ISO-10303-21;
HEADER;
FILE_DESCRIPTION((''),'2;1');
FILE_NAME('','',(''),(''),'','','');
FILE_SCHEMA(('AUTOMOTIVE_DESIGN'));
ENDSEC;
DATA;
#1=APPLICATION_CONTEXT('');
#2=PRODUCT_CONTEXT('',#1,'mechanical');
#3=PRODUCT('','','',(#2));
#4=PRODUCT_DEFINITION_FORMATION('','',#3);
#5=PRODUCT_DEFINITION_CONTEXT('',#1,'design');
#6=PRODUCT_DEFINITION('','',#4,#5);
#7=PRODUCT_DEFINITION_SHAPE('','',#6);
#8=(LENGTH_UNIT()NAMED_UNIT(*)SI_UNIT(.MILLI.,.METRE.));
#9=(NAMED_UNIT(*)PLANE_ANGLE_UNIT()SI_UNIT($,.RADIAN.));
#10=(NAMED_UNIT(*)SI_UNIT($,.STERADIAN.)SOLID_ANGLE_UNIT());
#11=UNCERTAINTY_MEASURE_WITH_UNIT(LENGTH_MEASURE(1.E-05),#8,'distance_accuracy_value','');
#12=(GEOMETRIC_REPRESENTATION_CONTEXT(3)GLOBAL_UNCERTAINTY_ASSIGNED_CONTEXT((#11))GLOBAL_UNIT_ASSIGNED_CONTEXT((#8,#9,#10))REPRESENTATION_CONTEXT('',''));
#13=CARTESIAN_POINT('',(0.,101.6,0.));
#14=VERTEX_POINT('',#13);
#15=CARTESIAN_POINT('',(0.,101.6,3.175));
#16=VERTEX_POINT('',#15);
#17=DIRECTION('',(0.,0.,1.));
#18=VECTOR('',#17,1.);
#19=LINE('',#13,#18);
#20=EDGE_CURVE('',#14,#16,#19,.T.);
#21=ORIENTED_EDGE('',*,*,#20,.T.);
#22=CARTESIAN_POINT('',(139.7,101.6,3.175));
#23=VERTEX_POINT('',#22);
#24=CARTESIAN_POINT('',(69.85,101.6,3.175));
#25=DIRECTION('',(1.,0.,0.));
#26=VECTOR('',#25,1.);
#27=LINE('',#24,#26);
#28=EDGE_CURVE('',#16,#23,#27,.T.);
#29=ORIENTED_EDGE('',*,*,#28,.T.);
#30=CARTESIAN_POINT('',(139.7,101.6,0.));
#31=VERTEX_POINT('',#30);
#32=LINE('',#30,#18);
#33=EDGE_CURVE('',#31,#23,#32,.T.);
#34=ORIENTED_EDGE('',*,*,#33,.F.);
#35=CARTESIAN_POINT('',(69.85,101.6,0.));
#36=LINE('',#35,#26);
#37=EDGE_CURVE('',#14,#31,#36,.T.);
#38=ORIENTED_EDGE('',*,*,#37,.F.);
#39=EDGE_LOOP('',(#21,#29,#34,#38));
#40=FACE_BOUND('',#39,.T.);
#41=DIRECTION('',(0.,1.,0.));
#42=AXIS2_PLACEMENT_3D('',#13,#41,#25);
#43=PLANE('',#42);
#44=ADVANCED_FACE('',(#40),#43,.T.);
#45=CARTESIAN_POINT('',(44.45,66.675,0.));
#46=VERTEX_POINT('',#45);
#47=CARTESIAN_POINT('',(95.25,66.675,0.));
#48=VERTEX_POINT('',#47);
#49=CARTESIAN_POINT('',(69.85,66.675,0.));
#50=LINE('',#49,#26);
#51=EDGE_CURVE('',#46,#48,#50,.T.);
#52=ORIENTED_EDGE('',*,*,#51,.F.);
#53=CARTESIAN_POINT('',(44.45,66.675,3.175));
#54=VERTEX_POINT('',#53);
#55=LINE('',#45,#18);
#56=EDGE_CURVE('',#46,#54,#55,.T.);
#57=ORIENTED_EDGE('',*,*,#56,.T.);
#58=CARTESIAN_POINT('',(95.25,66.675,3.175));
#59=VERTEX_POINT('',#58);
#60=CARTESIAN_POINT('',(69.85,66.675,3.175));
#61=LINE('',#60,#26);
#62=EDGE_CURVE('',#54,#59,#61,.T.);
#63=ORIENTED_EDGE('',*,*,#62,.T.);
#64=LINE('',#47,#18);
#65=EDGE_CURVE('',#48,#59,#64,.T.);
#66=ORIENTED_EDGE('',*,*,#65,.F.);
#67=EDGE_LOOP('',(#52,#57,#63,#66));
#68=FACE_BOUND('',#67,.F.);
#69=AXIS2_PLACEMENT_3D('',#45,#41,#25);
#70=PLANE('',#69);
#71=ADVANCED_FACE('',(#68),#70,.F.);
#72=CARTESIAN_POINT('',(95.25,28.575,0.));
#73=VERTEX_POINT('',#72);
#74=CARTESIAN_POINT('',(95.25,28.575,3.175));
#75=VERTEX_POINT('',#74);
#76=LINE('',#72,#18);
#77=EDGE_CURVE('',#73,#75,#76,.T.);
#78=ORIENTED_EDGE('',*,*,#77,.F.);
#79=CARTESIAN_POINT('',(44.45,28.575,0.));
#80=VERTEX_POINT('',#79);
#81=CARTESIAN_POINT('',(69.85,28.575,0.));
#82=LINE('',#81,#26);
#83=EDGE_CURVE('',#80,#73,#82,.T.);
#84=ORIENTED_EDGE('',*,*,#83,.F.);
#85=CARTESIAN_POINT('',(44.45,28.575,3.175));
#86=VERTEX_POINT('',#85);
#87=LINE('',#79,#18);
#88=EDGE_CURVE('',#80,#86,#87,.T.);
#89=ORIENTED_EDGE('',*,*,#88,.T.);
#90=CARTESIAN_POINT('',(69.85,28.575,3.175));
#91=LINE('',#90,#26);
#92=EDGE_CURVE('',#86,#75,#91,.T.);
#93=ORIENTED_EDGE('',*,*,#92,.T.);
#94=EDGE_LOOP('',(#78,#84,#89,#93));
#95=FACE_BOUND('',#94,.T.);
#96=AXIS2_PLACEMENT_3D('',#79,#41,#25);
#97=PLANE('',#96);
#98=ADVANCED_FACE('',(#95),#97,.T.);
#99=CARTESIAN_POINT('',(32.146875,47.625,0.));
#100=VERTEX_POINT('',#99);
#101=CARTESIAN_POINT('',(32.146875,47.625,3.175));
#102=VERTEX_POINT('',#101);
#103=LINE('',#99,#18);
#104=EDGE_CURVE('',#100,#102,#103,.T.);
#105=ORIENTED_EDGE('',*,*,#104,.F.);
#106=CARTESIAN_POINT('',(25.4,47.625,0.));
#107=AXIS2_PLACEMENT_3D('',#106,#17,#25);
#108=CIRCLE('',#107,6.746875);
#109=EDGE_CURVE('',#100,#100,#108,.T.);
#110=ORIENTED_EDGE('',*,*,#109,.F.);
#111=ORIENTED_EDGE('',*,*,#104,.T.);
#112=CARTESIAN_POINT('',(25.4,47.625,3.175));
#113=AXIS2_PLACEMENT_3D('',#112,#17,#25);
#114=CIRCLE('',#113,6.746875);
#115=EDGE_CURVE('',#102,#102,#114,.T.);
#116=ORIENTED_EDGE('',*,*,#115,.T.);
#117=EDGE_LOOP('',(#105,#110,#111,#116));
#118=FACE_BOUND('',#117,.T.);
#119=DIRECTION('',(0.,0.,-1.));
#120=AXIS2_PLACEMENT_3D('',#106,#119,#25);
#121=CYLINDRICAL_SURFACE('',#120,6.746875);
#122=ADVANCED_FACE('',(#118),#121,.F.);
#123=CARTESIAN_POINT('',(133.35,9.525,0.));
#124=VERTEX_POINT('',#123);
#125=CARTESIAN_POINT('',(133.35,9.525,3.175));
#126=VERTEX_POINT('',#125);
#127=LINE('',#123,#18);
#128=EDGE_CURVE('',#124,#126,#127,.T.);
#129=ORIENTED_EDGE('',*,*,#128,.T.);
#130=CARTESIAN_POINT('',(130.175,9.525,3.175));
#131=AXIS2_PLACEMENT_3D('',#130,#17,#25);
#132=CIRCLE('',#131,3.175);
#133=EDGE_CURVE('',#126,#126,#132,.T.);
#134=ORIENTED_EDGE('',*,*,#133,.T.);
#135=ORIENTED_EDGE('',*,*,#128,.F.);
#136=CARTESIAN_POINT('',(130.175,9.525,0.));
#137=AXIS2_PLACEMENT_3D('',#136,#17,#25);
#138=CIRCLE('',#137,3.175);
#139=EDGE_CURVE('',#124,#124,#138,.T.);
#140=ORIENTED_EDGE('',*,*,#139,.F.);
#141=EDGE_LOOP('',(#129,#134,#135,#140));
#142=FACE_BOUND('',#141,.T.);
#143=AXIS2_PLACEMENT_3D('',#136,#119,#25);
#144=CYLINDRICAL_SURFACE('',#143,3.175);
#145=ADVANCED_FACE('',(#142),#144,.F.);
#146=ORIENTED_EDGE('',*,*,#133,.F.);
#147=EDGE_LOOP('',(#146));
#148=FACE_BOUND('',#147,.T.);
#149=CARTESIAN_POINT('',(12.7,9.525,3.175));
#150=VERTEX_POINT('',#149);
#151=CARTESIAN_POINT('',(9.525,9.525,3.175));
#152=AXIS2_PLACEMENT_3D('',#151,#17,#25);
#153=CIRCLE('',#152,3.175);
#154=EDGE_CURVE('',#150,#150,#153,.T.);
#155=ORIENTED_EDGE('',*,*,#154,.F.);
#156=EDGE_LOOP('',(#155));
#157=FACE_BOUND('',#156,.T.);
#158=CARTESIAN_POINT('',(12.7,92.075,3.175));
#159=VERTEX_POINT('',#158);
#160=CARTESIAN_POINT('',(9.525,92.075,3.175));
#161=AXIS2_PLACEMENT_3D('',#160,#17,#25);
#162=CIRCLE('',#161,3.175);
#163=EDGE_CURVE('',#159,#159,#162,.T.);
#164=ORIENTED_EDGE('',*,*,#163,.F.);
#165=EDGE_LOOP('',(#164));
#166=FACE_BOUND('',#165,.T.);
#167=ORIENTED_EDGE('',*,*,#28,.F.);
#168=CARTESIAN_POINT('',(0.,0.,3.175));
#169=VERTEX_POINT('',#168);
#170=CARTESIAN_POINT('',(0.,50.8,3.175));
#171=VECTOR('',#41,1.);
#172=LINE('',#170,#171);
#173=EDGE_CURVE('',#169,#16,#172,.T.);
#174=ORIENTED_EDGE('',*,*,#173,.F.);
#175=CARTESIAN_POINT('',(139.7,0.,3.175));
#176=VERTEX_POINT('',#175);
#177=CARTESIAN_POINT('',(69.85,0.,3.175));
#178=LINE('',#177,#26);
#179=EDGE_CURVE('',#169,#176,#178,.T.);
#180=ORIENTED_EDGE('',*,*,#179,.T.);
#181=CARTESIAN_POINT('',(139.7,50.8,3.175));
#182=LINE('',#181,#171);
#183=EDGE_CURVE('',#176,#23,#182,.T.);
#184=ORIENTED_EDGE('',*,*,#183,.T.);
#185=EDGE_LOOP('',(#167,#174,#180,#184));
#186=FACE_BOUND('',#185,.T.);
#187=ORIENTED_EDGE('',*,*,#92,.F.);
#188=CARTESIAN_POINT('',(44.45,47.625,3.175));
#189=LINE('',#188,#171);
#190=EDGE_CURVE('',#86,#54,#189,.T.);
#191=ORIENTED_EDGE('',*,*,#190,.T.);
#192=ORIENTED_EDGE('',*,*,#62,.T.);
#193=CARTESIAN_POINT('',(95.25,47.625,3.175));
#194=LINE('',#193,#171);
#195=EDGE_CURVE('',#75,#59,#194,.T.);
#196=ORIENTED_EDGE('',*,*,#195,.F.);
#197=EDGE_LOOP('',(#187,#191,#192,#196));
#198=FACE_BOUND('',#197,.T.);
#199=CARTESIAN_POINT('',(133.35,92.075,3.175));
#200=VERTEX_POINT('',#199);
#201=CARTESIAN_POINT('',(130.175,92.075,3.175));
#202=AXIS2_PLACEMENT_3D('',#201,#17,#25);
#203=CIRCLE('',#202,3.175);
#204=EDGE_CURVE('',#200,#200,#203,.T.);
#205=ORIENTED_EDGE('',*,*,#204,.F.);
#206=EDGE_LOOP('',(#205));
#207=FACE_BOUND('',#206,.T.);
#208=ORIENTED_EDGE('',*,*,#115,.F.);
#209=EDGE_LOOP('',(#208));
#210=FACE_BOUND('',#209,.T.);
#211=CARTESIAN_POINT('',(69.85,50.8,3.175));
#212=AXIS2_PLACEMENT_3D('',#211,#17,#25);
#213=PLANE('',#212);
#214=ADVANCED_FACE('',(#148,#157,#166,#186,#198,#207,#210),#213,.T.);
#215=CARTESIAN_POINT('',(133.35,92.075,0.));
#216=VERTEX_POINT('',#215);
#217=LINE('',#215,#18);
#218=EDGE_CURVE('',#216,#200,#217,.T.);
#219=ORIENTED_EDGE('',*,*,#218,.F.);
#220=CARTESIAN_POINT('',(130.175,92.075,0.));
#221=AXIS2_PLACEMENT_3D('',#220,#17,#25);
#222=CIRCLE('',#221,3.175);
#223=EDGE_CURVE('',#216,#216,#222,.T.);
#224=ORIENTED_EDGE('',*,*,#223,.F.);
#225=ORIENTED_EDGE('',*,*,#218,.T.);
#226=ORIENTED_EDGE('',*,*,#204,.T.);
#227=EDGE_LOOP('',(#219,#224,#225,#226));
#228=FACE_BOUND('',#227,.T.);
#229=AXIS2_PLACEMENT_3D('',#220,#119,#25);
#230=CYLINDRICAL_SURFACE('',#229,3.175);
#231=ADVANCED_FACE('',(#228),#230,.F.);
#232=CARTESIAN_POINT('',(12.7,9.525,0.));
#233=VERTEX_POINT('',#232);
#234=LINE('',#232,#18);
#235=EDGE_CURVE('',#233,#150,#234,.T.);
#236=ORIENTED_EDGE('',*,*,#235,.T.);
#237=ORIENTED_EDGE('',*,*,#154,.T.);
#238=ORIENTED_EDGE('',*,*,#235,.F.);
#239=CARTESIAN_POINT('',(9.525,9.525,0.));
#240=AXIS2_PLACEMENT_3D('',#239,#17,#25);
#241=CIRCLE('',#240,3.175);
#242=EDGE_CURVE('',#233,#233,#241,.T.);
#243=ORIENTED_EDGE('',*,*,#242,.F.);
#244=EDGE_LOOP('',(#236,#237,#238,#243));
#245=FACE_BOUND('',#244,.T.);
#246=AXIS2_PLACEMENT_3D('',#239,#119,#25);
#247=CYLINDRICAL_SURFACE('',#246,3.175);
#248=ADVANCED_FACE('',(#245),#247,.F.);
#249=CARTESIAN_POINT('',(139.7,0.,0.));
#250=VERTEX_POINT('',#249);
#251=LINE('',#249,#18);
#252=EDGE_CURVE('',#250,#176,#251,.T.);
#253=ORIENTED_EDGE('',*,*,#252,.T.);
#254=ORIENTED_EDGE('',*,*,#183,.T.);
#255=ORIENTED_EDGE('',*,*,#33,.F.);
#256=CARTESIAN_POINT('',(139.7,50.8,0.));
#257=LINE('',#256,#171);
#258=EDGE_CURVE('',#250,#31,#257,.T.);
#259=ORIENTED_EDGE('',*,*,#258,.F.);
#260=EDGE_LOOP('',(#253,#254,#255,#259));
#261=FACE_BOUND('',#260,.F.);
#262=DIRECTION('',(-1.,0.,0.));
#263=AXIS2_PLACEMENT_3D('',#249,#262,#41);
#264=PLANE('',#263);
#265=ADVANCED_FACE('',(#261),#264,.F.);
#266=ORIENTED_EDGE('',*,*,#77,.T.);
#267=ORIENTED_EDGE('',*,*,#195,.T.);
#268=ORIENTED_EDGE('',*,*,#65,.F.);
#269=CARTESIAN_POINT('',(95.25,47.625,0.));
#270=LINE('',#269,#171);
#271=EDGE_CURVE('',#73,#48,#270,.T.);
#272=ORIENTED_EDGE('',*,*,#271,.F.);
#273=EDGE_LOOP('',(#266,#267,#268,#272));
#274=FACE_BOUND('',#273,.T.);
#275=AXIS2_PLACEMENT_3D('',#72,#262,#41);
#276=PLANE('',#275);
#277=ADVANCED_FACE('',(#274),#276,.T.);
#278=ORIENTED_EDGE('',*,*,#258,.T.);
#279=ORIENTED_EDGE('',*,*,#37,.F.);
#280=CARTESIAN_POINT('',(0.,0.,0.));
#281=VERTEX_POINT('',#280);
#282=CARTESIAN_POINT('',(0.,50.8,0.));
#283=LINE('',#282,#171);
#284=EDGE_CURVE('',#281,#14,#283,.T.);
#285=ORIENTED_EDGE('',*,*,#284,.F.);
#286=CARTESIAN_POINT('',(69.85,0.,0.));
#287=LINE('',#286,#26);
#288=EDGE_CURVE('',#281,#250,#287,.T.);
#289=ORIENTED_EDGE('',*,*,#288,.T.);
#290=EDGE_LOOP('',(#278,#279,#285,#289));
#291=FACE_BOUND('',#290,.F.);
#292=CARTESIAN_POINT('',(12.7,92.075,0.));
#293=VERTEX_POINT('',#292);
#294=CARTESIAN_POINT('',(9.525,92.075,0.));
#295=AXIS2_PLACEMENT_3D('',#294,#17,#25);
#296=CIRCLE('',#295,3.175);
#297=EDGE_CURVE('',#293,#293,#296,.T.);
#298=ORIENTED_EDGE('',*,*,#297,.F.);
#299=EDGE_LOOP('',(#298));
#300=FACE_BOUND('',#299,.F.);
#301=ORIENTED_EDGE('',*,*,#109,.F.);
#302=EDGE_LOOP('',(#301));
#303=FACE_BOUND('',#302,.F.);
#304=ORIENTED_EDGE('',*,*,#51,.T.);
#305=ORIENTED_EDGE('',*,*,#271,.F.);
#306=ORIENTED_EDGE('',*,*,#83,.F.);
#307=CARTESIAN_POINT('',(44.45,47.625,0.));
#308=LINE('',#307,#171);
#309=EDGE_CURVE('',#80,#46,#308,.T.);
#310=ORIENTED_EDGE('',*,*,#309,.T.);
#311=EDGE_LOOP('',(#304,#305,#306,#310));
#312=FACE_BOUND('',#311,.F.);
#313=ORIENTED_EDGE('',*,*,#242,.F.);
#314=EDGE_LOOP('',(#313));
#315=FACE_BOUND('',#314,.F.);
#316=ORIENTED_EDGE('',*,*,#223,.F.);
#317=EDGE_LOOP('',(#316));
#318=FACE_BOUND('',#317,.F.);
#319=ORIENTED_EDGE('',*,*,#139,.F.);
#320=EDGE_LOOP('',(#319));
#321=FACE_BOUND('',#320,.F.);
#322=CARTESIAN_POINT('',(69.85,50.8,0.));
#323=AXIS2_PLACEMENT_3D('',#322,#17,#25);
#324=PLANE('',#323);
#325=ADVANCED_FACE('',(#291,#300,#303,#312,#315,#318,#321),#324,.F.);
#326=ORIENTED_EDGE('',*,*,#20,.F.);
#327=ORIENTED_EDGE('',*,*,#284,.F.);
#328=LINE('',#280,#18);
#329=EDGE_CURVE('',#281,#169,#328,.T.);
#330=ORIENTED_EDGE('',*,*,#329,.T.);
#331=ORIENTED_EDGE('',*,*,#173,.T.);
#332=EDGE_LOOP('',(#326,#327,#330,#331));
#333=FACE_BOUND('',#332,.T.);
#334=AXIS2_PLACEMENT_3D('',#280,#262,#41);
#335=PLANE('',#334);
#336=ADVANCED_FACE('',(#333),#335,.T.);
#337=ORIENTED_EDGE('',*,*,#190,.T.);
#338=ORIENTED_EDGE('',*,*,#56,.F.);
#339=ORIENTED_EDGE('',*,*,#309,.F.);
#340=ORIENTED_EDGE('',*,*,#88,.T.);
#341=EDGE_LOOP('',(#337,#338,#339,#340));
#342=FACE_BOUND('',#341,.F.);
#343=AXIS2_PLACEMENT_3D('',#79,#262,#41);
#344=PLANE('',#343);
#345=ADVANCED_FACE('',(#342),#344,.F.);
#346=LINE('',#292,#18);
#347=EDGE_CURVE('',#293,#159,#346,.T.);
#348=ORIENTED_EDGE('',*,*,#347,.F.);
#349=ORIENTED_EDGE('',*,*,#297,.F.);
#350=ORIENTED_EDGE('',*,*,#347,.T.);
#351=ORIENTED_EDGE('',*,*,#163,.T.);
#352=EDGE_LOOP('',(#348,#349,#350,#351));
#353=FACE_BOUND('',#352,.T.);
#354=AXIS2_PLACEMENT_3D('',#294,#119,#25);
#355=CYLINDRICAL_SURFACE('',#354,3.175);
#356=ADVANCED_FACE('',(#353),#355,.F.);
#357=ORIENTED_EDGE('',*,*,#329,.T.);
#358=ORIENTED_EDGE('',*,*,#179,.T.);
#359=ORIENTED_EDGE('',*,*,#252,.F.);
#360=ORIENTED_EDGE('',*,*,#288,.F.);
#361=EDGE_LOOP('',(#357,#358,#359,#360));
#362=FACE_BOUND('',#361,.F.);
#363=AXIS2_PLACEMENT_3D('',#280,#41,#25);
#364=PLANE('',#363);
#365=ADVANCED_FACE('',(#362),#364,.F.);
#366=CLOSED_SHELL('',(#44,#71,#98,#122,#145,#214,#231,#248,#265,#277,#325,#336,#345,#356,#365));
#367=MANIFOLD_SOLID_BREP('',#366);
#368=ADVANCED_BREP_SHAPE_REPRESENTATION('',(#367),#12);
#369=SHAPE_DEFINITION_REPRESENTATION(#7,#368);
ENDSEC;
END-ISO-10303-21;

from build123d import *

# Parameters (mm, degrees)
F0_W     = 139.7
F0_H     = 101.6
F0_R     = 3.175
F0_R_2   = 6.746875
F0_W_2   = 50.8
F0_H_2   = 38.1
F1_DEPTH = 3.175


# Not quite as in the source:
# - a feature names something its author has since deleted; it is built from what else it names


with BuildPart() as f1:
    # F0 (on Top) → F1 (new body)
    with BuildSketch(Plane.XY):
        with Locations((69.85, 50.8)):
            Rectangle(F0_W, F0_H)
        with Locations((9.525, 9.525)):
            Circle(F0_R, mode=Mode.SUBTRACT)
        with Locations((25.4, 47.625)):
            Circle(F0_R_2, mode=Mode.SUBTRACT)
        with Locations((130.175, 9.525)):
            Circle(F0_R, mode=Mode.SUBTRACT)
        with Locations((69.85, 47.625)):
            Rectangle(F0_W_2, F0_H_2, mode=Mode.SUBTRACT)
        with Locations((9.525, 92.075)):
            Circle(F0_R, mode=Mode.SUBTRACT)
        with Locations((130.175, 92.075)):
            Circle(F0_R, mode=Mode.SUBTRACT)
    extrude(amount=F1_DEPTH)


solid = f1.part
